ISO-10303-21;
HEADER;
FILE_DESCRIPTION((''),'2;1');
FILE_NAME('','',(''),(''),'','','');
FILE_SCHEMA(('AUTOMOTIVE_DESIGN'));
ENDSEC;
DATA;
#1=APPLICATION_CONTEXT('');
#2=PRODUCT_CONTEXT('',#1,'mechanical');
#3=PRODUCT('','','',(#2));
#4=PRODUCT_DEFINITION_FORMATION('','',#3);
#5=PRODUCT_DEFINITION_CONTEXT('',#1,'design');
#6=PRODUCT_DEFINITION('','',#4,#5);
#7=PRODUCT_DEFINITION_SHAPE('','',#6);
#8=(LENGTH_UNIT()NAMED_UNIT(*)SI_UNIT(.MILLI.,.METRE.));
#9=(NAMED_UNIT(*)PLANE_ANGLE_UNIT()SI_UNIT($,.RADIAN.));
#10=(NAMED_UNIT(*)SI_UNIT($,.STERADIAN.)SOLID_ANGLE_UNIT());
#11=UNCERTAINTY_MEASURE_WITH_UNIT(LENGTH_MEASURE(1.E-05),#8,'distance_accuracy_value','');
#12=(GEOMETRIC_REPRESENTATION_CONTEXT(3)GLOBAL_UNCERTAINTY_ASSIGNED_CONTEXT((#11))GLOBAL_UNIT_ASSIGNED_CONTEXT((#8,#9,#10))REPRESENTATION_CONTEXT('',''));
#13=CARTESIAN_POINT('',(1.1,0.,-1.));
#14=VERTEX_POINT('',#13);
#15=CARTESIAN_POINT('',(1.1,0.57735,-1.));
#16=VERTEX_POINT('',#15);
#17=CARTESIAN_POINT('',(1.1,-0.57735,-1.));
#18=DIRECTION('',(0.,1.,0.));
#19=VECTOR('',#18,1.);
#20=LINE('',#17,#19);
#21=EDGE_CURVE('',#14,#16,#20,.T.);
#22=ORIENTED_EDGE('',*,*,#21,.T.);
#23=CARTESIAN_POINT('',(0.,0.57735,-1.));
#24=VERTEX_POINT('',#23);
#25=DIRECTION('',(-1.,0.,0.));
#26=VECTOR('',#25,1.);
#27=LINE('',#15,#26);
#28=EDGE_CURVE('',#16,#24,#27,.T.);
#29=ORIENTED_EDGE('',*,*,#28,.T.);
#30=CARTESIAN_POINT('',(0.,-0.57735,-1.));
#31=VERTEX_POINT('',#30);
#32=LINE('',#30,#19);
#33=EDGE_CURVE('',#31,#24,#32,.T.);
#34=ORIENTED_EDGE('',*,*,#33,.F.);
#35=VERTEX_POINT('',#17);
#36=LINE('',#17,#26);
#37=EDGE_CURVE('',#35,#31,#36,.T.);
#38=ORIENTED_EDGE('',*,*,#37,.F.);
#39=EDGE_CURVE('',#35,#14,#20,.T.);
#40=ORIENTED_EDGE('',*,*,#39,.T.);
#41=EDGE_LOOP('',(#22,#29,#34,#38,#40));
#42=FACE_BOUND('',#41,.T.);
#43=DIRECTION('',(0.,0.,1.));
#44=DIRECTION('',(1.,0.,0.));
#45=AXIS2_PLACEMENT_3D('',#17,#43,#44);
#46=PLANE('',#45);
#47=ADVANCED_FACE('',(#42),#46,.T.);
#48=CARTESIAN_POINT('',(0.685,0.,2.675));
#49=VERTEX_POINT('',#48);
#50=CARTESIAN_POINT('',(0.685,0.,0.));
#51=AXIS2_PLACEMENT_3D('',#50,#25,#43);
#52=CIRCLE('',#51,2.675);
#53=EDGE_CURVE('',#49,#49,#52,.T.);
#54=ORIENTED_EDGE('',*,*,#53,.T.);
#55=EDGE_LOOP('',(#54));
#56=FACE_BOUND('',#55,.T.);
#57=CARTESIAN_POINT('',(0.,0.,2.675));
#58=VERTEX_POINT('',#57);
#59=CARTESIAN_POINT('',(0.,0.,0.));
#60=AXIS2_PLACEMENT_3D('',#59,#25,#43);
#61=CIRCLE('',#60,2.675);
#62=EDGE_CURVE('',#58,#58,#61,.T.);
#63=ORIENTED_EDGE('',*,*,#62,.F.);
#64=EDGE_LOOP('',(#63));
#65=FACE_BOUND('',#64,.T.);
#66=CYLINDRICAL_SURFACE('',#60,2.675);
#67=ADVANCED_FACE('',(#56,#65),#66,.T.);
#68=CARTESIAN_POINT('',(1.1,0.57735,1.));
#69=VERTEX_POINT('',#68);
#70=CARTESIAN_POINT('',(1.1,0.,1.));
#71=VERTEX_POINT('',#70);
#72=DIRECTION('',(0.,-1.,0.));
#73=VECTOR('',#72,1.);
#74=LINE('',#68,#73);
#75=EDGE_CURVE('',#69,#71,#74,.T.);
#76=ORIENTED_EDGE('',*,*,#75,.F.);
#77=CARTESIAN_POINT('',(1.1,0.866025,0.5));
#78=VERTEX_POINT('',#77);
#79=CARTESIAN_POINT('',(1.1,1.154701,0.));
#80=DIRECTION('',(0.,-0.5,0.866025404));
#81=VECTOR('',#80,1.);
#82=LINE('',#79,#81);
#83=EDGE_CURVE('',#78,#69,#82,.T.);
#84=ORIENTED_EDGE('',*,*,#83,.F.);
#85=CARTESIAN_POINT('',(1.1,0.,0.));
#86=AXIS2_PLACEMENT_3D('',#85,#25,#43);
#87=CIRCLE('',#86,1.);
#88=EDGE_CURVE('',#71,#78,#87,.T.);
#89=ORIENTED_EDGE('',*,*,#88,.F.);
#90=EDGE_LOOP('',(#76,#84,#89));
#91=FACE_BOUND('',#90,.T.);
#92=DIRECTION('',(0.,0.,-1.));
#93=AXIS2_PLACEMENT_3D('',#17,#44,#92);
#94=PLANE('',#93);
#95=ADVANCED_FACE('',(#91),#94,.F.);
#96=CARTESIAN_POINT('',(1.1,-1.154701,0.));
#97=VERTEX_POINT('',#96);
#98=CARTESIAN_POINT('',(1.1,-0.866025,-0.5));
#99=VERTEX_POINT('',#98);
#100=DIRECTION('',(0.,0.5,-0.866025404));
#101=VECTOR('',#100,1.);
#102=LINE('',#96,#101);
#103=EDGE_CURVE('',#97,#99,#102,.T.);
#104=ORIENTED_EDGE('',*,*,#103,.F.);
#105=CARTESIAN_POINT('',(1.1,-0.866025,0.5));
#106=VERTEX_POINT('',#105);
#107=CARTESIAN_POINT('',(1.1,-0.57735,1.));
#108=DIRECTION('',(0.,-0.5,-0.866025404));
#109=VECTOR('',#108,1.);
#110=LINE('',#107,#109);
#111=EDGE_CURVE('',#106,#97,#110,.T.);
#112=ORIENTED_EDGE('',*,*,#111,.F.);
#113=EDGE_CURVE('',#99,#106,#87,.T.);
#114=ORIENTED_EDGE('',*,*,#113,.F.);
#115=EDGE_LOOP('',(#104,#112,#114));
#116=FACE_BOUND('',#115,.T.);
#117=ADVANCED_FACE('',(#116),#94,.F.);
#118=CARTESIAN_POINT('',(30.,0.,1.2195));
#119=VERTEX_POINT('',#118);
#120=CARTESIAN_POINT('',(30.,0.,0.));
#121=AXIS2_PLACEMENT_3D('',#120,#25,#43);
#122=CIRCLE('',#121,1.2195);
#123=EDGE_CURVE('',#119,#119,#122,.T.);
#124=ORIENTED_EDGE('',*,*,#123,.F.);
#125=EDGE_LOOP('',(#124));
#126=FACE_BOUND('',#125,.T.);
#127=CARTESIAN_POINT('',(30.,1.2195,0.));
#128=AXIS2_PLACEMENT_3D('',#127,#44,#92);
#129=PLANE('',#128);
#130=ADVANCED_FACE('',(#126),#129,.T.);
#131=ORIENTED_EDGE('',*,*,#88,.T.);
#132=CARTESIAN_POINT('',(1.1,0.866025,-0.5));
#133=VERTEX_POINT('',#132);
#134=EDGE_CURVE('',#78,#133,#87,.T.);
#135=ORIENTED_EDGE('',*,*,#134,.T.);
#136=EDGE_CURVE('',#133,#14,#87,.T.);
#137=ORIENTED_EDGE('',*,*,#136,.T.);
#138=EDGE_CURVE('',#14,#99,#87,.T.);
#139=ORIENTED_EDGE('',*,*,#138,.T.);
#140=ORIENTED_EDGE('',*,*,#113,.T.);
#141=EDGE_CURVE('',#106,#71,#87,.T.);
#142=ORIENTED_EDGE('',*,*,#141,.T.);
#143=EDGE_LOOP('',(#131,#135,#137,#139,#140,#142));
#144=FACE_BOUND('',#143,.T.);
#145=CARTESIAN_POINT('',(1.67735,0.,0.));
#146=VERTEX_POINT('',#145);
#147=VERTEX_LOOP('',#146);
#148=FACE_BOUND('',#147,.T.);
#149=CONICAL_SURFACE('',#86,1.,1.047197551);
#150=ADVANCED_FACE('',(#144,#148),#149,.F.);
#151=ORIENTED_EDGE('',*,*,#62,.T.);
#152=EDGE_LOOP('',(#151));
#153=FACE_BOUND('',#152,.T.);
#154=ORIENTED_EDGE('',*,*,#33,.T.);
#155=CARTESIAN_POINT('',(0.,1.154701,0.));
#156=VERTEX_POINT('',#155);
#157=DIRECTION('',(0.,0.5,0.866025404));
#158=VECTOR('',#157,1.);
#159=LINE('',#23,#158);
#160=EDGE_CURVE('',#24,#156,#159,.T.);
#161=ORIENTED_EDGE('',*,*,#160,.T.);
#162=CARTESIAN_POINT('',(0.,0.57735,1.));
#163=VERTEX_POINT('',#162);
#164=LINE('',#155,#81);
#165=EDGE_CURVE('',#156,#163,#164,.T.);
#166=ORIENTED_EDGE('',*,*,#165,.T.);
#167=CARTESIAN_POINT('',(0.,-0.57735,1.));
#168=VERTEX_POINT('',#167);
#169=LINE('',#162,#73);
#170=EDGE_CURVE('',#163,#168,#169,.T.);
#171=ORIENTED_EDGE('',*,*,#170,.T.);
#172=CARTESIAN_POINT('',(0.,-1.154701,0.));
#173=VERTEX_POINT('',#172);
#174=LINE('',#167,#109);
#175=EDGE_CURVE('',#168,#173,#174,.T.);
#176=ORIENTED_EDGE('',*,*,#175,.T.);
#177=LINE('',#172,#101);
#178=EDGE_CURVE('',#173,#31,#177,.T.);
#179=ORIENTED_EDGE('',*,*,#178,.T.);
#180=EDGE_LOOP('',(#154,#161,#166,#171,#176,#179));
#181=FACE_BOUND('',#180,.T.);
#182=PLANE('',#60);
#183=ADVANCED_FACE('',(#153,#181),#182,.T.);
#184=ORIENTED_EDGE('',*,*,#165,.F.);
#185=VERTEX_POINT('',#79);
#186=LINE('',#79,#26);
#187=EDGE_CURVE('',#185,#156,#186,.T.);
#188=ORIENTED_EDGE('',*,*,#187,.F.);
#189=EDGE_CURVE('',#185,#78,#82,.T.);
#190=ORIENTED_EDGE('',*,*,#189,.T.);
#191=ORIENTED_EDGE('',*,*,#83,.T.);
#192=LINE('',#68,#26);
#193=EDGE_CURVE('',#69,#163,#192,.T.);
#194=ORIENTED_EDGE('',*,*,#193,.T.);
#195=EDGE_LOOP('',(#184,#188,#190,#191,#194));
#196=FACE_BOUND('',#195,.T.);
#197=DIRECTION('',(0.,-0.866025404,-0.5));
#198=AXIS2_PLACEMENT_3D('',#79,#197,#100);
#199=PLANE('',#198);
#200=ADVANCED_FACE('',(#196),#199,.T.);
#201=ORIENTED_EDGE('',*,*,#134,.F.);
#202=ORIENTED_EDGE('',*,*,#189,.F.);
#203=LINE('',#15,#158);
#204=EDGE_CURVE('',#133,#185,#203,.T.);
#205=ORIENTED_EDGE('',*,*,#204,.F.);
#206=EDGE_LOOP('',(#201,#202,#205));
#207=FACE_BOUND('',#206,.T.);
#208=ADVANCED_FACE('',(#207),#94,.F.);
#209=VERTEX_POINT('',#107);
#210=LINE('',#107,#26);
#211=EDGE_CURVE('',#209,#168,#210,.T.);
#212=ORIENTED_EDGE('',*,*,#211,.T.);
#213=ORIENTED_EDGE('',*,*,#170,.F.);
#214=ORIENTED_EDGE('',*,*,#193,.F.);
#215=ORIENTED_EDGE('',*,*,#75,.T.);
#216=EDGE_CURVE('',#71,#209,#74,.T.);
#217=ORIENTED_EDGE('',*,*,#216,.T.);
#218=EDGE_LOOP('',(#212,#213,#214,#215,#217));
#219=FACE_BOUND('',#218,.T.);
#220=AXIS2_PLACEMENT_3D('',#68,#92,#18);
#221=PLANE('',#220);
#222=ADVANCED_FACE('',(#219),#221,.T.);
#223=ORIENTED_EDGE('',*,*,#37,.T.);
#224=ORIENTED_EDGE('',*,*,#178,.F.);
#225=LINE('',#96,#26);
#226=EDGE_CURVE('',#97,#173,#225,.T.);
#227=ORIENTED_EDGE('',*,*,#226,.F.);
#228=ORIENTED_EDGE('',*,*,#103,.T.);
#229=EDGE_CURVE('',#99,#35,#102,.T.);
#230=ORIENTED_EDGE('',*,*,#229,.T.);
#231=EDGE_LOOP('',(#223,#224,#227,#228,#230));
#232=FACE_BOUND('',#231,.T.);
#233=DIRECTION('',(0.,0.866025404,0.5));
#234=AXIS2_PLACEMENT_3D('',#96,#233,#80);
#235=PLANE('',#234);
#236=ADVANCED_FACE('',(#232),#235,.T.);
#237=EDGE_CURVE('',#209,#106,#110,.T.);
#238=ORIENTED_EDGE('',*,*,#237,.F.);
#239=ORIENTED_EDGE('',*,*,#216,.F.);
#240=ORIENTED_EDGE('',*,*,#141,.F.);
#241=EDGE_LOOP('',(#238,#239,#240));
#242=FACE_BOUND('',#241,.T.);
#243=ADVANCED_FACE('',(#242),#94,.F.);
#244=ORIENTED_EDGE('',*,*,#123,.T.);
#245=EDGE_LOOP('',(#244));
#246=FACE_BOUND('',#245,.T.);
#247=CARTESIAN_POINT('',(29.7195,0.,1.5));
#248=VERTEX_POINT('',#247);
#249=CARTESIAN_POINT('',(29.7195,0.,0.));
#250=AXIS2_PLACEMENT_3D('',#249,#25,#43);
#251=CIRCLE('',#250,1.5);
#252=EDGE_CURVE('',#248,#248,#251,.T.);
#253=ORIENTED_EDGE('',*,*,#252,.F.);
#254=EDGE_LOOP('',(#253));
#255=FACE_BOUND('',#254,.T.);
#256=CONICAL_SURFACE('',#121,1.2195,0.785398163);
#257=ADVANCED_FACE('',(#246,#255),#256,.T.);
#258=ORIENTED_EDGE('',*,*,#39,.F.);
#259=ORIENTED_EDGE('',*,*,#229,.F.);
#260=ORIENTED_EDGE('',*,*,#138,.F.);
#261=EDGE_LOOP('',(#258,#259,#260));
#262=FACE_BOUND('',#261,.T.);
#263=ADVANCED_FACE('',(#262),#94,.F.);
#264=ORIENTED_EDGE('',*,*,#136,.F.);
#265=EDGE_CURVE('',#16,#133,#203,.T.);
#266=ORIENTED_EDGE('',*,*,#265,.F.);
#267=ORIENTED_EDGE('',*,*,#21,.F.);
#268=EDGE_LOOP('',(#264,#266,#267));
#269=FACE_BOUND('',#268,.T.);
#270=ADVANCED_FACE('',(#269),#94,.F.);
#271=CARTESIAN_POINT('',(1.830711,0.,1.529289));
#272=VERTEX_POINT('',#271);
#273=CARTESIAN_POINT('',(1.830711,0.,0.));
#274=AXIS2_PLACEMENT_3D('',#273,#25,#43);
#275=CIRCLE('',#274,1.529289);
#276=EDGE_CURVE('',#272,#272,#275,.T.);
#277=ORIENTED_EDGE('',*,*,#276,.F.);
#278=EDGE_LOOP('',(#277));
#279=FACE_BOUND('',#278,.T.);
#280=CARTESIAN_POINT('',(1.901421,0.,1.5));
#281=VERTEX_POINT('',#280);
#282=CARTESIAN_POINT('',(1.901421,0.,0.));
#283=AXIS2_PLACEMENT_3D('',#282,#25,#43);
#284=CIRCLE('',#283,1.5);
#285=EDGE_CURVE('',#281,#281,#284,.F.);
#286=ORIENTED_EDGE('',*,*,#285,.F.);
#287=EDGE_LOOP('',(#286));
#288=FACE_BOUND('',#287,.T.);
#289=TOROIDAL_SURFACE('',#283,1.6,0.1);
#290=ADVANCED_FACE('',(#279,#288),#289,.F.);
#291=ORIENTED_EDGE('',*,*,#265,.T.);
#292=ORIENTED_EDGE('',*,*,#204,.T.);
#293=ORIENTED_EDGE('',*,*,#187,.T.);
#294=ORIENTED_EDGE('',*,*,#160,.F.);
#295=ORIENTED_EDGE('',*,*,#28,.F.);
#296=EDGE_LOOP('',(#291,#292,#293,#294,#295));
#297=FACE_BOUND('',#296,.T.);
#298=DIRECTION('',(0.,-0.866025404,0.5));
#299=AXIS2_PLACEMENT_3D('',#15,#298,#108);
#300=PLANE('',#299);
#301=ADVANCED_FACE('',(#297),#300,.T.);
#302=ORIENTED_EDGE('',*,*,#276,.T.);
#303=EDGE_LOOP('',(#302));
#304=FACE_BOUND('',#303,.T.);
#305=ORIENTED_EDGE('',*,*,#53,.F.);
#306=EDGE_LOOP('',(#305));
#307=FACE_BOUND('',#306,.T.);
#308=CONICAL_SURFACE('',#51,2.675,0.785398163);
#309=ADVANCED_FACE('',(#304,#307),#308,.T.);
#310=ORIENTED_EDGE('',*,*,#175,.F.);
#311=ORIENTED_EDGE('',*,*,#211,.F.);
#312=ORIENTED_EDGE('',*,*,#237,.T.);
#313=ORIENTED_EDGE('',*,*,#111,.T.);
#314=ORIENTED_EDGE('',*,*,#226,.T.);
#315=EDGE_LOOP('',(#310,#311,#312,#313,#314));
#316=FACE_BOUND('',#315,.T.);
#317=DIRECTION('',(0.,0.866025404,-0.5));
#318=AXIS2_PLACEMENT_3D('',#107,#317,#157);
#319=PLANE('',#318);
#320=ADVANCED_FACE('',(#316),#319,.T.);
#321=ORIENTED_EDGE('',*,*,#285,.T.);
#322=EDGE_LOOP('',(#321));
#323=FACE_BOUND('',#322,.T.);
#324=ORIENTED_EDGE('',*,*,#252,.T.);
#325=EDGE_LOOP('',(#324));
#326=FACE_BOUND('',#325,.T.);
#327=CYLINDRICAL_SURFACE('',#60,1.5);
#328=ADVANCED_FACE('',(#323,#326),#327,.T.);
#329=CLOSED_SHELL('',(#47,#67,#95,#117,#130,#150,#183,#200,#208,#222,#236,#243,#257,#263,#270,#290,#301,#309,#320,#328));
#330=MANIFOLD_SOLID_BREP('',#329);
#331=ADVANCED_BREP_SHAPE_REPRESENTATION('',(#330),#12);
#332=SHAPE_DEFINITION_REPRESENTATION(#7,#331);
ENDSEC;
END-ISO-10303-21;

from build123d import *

# Parameters (mm, degrees)
FILLET1_R   = 0.1
HEX_START   = -1.1
HEX_2_DEPTH = 1.1


with BuildPart() as part:
    # BodySke → BaseBody (revolve)
    with BuildSketch(Plane.XY, mode=Mode.PRIVATE) as basebody_sk:
        Polygon((0, 0), (0, 2.675), (0.685, 2.675), (1.86, 1.5), (29.7195, 1.5), (30, 1.2195), (30, 0), align=None)
    revolve(basebody_sk.sketch.rotate(Axis((0, 0, 0), (1, 0, 0)), 90), axis=Axis((0, 0, 0), (1, 0, 0)))

    # Fillet1
    fillet1_edges = [part.edges().sort_by_distance(p)[0] for p in [
        (1.86, 0, -1.5),
    ]]
    fillet(fillet1_edges, radius=FILLET1_R)

    # Hex 2: read off the stored shape, not the designer's step
    # Hex 2 outline → Hex 2 (cut)
    with BuildSketch(Plane.ZY.offset(HEX_START)):
        Polygon((-1, -0.577350269), (0, -1.154700538), (1, -0.577350269), (1, 0.577350269), (0, 1.154700538), (-1, 0.577350269), align=None)
    extrude(amount=HEX_2_DEPTH, mode=Mode.SUBTRACT)

    # Hex 2 2 outline → Hex 2 2 (revolve, cut)
    with BuildSketch(Plane.YX):
        Polygon((1, 1.1), (0, 1.677350269), (0, 1.1), align=None)
    revolve(axis=Axis((0, 0, 0), (1, 0, 0)), mode=Mode.SUBTRACT)


solid = part.part
